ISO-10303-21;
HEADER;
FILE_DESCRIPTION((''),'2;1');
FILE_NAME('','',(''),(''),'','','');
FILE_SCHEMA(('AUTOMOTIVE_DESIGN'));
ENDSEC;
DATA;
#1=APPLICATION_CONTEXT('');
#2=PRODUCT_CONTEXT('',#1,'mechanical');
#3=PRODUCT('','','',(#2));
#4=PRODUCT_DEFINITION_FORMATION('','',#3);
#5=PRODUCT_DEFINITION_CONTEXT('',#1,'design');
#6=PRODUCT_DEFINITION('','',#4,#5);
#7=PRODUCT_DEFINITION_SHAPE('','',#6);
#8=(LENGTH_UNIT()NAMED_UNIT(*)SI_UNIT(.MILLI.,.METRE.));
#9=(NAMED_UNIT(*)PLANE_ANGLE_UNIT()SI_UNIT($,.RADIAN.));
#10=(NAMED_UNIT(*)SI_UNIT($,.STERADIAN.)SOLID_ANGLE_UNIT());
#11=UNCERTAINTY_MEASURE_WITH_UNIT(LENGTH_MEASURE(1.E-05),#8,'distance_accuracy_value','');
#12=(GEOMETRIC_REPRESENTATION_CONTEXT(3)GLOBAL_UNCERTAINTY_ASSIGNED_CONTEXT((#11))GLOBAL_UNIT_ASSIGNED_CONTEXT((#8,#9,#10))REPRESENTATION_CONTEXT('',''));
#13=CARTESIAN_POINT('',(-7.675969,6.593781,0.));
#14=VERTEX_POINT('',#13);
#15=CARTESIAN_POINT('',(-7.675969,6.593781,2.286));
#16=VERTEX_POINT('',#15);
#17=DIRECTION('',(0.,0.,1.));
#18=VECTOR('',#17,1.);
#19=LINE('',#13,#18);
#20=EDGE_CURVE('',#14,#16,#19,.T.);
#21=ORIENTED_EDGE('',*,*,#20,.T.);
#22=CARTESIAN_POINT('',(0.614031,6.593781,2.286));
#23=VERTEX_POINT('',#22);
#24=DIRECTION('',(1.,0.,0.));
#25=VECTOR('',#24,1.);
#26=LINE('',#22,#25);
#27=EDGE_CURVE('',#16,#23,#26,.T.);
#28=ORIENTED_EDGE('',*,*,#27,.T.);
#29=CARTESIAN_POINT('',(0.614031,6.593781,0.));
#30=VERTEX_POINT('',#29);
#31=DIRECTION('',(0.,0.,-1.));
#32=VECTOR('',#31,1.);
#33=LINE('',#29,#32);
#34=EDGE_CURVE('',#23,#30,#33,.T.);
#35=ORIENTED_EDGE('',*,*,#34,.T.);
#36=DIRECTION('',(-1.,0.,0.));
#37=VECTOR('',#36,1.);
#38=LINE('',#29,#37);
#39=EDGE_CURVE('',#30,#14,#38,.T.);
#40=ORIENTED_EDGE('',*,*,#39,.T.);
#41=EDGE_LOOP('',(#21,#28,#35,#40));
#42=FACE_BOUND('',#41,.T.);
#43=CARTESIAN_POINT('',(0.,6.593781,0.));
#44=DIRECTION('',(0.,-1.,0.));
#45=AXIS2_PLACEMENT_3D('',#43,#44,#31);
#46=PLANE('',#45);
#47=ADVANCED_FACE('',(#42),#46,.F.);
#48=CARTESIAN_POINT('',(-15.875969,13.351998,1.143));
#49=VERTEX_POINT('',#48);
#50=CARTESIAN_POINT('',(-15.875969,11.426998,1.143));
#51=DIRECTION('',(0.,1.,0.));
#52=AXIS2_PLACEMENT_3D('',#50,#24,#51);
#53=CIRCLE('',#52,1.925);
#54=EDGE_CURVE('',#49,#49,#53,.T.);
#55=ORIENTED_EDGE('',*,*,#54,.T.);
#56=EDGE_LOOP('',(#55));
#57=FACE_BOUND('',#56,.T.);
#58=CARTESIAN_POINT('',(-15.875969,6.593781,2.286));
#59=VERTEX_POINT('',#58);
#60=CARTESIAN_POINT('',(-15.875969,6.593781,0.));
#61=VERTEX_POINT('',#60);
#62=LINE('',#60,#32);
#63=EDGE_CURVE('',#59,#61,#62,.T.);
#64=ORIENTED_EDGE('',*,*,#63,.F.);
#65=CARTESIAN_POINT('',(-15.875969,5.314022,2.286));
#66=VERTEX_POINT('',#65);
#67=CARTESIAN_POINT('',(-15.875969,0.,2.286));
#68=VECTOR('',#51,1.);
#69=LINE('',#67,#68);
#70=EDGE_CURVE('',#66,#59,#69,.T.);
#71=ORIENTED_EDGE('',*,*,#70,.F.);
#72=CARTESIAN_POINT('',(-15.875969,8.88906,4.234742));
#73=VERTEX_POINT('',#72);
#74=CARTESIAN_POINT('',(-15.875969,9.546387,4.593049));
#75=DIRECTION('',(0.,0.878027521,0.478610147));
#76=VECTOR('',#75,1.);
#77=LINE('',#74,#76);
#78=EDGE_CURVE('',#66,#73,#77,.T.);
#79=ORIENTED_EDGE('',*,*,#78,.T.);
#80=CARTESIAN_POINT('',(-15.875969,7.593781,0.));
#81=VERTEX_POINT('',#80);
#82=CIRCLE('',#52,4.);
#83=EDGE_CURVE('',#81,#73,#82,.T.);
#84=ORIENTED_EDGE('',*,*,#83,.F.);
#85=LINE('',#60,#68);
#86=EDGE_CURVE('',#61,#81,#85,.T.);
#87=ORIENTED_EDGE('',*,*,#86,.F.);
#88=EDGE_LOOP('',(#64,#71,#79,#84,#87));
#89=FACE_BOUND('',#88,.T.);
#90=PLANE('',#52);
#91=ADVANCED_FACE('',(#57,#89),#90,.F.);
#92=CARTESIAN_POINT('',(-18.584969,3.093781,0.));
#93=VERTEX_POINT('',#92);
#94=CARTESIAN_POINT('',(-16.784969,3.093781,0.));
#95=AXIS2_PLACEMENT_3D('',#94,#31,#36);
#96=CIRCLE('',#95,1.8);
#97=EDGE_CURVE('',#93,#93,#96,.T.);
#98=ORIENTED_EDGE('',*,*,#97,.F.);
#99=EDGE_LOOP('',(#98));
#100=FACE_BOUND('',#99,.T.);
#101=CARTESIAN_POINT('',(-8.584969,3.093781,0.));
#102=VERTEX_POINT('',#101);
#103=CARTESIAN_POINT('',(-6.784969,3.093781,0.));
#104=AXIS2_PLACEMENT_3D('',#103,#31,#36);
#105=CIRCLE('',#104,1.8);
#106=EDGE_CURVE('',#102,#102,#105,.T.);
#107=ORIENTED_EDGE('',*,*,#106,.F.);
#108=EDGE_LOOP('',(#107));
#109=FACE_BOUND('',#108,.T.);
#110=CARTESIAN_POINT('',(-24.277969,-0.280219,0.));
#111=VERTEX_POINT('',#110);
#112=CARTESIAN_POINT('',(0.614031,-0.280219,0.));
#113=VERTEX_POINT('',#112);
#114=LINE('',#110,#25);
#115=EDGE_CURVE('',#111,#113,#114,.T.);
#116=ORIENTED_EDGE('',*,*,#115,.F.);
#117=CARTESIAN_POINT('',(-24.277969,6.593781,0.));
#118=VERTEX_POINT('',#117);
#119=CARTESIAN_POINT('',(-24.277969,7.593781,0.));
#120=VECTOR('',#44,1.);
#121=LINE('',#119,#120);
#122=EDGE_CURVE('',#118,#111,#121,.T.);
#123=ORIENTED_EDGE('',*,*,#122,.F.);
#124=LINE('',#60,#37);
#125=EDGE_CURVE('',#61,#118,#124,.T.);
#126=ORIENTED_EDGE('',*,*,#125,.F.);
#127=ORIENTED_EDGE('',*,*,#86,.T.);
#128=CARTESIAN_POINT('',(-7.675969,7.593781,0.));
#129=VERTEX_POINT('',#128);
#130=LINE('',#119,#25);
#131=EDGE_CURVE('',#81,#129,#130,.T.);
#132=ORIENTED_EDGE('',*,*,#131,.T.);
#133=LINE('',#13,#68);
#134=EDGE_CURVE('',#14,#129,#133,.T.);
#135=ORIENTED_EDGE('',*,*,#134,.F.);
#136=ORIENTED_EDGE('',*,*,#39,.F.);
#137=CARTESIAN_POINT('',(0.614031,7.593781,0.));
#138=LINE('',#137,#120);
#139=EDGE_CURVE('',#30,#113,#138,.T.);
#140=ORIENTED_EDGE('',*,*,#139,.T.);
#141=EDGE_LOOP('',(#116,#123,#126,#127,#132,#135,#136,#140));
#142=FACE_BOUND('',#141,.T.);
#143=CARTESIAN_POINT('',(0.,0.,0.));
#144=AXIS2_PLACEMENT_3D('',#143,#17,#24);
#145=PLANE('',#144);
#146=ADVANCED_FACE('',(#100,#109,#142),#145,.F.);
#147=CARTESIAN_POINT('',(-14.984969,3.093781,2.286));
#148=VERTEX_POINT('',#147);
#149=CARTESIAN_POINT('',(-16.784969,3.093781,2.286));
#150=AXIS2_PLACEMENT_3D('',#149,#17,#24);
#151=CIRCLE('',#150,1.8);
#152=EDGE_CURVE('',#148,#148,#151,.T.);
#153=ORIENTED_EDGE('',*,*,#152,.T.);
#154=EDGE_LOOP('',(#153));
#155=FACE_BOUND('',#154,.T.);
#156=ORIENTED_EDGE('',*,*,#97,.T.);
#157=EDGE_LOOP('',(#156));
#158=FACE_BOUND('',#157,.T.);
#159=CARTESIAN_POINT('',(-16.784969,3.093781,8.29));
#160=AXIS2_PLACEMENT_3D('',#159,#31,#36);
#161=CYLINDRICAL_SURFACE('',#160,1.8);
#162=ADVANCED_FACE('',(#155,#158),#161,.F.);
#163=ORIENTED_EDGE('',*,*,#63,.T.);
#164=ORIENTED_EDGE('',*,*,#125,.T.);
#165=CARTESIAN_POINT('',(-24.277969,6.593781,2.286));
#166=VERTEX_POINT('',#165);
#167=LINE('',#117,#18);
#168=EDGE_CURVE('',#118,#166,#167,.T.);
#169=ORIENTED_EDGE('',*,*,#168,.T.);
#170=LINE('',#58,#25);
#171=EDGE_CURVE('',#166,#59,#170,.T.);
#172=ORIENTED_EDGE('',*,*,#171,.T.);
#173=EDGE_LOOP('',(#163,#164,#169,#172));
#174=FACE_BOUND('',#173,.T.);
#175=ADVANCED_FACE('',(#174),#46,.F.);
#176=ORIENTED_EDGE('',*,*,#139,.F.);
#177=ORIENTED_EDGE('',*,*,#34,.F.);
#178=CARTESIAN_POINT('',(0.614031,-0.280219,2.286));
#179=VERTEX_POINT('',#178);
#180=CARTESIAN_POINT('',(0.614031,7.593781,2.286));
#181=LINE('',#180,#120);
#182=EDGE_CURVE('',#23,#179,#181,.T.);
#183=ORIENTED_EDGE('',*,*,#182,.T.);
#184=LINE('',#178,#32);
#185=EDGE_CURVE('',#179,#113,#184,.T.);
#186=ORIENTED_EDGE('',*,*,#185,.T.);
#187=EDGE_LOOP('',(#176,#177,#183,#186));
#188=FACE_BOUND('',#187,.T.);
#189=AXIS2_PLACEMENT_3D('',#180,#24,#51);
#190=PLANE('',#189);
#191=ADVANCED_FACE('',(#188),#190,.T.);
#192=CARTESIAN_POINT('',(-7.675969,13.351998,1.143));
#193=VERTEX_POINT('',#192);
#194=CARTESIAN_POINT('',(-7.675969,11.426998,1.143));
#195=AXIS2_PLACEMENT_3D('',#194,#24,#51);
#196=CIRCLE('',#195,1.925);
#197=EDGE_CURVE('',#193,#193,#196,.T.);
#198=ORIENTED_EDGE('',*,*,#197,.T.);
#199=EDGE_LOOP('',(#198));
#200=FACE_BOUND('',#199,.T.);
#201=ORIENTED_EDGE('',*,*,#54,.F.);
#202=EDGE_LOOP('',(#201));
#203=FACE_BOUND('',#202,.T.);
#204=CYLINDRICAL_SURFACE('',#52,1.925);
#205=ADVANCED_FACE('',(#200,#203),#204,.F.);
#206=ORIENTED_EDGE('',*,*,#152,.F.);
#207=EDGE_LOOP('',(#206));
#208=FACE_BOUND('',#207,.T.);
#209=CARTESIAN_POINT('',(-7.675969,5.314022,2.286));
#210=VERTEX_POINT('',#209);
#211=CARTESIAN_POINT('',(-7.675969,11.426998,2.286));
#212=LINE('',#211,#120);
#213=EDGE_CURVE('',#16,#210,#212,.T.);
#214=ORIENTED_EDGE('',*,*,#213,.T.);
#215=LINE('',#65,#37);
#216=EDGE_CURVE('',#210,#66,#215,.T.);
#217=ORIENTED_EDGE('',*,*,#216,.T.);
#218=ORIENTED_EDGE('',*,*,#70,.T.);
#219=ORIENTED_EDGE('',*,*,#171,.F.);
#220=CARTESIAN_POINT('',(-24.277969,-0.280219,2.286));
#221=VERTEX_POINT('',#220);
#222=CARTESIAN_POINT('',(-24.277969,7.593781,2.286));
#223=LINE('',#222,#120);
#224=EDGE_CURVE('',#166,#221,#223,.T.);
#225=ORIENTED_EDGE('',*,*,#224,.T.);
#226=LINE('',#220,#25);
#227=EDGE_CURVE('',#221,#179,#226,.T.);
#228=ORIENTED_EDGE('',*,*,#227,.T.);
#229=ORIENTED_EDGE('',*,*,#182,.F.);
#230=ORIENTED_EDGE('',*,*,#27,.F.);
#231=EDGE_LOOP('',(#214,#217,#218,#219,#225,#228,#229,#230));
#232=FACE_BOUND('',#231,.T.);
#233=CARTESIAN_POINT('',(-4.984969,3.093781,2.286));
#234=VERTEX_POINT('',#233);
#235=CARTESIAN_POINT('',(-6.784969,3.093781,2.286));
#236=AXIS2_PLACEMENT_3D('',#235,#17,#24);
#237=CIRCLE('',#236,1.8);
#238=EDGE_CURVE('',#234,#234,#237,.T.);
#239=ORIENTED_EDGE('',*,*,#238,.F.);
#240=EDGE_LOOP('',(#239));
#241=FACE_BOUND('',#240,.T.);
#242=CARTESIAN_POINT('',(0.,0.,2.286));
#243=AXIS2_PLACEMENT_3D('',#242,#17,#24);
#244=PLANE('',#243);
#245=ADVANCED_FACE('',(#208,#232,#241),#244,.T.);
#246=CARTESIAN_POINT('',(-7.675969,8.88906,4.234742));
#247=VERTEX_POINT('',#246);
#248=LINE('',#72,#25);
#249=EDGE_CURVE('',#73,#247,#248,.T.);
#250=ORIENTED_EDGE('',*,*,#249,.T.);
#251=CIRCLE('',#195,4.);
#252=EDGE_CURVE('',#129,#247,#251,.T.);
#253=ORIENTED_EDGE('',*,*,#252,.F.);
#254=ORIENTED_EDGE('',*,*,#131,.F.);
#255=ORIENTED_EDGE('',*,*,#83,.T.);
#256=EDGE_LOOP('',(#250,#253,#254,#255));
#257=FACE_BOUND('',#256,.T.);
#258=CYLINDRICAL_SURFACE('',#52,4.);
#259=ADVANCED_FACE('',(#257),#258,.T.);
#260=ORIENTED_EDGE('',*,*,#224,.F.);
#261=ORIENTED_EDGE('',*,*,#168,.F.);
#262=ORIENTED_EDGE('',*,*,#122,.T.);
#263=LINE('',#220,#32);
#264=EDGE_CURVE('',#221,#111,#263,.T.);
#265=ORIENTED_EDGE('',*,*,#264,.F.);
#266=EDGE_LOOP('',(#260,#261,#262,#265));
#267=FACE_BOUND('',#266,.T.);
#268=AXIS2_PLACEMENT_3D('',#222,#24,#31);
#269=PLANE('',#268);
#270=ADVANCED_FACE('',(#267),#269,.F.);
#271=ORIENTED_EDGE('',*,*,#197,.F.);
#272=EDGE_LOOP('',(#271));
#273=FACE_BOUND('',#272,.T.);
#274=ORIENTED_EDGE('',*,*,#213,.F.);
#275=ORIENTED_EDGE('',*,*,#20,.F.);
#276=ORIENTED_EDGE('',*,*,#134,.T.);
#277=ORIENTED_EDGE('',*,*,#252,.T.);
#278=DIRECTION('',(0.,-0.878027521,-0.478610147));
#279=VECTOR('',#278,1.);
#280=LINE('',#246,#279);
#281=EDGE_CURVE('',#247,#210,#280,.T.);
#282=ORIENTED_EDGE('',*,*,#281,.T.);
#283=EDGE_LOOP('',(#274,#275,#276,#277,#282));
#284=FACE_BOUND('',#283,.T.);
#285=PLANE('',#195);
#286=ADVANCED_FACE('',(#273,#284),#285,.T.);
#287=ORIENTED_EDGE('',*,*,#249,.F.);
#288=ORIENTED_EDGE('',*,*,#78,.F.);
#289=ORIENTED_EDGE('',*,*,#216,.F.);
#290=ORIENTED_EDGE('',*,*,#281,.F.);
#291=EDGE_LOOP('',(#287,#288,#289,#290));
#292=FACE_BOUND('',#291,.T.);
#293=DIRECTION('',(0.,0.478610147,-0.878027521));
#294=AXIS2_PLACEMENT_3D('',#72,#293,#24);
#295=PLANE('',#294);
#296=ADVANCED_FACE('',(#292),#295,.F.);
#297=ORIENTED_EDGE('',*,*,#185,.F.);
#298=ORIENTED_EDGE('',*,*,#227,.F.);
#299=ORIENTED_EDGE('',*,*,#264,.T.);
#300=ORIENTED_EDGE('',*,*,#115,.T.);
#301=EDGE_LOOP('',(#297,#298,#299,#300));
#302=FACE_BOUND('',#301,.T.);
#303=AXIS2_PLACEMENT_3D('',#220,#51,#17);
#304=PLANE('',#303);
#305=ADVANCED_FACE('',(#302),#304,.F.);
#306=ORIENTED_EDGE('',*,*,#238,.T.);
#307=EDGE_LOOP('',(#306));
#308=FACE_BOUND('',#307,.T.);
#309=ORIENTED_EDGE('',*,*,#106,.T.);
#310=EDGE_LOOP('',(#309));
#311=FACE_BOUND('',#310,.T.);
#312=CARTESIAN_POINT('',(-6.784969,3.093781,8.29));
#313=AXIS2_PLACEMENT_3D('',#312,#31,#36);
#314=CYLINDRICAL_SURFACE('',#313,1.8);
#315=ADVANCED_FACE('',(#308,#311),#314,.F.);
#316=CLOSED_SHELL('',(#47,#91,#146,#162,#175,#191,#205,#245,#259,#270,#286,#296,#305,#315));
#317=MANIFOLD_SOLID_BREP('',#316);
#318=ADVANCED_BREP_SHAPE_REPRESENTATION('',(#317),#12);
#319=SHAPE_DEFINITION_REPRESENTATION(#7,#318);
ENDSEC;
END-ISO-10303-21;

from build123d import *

# Parameters (mm, degrees)
SKETCH1_W           = 24.892
SKETCH1_H           = 7.874
BOSS_EXTRUDE1_DEPTH = 2.286
SKETCH8_R           = 1.8
CUT_EXTRUDE4_DEPTH  = 8.29
BOSS_EXTRUDE2_START = -8.29
SKETCH10_R          = 4
SKETCH10_R_2        = 1.925
BOSS_EXTRUDE2_DEPTH = 8.2
CHAMFER1_START      = -15.87596875
CHAMFER1_DEPTH      = 8.2
SKETCH11_W          = 8.402
SKETCH11_H          = 2.286
SKETCH11_W_2        = 8.29
CUT_EXTRUDE5_DEPTH  = 1


with BuildPart() as part:
    # Sketch1 → Boss-Extrude1 (new body)
    with BuildSketch(Plane.XY):
        with Locations((-11.83196875, 3.65678125)):
            Rectangle(SKETCH1_W, SKETCH1_H)
    extrude(amount=BOSS_EXTRUDE1_DEPTH)

    # Sketch8 → Cut-Extrude4 (cut)
    with BuildSketch(Plane(origin=(0, 0, 0), x_dir=(-1, 0, 0), z_dir=(0, 0, -1))):
        with Locations((6.78496875, 3.09378125)):
            Circle(SKETCH8_R)
        with Locations((16.78496875, 3.09378125)):
            Circle(SKETCH8_R)
    extrude(amount=-CUT_EXTRUDE4_DEPTH, mode=Mode.SUBTRACT)

    # Sketch10 → Boss-Extrude2 (add)
    with BuildSketch(Plane(origin=(0.61403125, 0, 0), x_dir=(0, 0, -1), z_dir=(1, 0, 0)).offset(BOSS_EXTRUDE2_START)):
        with Locations((-1.143, 11.426998045)):
            Circle(SKETCH10_R)
        with Locations(Location((-1.143, 11.426998045, 0), (0, 0, 90))):
            Circle(SKETCH10_R_2, mode=Mode.SUBTRACT)
    extrude(amount=-BOSS_EXTRUDE2_DEPTH)

    # Chamfer1: read off the stored shape, not the designer's step
    # Chamfer1 outline → Chamfer1 (add)
    with BuildSketch(Plane.YZ.offset(CHAMFER1_START)):
        with BuildLine():
            Line((8.88905951, 4.234741902), (5.314022428, 2.286))
            Line((5.314022428, 2.286), (7.59378125, 2.286))
            ThreePointArc((7.59378125, 2.286), (8.095736451, 3.357203285), (8.88905951, 4.234741902))
        make_face()
    extrude(amount=CHAMFER1_DEPTH)

    # Sketch11 → Cut-Extrude5 (cut)
    with BuildSketch(Plane(origin=(0, 7.59378125, 0), x_dir=(1, 0, 0), z_dir=(0, 1, 0))):
        with Locations((-20.07696875, -1.143)):
            Rectangle(SKETCH11_W, SKETCH11_H)
        with Locations((-3.53096875, -1.143)):
            Rectangle(SKETCH11_W_2, SKETCH11_H)
    extrude(amount=-CUT_EXTRUDE5_DEPTH, mode=Mode.SUBTRACT)


solid = part.part
